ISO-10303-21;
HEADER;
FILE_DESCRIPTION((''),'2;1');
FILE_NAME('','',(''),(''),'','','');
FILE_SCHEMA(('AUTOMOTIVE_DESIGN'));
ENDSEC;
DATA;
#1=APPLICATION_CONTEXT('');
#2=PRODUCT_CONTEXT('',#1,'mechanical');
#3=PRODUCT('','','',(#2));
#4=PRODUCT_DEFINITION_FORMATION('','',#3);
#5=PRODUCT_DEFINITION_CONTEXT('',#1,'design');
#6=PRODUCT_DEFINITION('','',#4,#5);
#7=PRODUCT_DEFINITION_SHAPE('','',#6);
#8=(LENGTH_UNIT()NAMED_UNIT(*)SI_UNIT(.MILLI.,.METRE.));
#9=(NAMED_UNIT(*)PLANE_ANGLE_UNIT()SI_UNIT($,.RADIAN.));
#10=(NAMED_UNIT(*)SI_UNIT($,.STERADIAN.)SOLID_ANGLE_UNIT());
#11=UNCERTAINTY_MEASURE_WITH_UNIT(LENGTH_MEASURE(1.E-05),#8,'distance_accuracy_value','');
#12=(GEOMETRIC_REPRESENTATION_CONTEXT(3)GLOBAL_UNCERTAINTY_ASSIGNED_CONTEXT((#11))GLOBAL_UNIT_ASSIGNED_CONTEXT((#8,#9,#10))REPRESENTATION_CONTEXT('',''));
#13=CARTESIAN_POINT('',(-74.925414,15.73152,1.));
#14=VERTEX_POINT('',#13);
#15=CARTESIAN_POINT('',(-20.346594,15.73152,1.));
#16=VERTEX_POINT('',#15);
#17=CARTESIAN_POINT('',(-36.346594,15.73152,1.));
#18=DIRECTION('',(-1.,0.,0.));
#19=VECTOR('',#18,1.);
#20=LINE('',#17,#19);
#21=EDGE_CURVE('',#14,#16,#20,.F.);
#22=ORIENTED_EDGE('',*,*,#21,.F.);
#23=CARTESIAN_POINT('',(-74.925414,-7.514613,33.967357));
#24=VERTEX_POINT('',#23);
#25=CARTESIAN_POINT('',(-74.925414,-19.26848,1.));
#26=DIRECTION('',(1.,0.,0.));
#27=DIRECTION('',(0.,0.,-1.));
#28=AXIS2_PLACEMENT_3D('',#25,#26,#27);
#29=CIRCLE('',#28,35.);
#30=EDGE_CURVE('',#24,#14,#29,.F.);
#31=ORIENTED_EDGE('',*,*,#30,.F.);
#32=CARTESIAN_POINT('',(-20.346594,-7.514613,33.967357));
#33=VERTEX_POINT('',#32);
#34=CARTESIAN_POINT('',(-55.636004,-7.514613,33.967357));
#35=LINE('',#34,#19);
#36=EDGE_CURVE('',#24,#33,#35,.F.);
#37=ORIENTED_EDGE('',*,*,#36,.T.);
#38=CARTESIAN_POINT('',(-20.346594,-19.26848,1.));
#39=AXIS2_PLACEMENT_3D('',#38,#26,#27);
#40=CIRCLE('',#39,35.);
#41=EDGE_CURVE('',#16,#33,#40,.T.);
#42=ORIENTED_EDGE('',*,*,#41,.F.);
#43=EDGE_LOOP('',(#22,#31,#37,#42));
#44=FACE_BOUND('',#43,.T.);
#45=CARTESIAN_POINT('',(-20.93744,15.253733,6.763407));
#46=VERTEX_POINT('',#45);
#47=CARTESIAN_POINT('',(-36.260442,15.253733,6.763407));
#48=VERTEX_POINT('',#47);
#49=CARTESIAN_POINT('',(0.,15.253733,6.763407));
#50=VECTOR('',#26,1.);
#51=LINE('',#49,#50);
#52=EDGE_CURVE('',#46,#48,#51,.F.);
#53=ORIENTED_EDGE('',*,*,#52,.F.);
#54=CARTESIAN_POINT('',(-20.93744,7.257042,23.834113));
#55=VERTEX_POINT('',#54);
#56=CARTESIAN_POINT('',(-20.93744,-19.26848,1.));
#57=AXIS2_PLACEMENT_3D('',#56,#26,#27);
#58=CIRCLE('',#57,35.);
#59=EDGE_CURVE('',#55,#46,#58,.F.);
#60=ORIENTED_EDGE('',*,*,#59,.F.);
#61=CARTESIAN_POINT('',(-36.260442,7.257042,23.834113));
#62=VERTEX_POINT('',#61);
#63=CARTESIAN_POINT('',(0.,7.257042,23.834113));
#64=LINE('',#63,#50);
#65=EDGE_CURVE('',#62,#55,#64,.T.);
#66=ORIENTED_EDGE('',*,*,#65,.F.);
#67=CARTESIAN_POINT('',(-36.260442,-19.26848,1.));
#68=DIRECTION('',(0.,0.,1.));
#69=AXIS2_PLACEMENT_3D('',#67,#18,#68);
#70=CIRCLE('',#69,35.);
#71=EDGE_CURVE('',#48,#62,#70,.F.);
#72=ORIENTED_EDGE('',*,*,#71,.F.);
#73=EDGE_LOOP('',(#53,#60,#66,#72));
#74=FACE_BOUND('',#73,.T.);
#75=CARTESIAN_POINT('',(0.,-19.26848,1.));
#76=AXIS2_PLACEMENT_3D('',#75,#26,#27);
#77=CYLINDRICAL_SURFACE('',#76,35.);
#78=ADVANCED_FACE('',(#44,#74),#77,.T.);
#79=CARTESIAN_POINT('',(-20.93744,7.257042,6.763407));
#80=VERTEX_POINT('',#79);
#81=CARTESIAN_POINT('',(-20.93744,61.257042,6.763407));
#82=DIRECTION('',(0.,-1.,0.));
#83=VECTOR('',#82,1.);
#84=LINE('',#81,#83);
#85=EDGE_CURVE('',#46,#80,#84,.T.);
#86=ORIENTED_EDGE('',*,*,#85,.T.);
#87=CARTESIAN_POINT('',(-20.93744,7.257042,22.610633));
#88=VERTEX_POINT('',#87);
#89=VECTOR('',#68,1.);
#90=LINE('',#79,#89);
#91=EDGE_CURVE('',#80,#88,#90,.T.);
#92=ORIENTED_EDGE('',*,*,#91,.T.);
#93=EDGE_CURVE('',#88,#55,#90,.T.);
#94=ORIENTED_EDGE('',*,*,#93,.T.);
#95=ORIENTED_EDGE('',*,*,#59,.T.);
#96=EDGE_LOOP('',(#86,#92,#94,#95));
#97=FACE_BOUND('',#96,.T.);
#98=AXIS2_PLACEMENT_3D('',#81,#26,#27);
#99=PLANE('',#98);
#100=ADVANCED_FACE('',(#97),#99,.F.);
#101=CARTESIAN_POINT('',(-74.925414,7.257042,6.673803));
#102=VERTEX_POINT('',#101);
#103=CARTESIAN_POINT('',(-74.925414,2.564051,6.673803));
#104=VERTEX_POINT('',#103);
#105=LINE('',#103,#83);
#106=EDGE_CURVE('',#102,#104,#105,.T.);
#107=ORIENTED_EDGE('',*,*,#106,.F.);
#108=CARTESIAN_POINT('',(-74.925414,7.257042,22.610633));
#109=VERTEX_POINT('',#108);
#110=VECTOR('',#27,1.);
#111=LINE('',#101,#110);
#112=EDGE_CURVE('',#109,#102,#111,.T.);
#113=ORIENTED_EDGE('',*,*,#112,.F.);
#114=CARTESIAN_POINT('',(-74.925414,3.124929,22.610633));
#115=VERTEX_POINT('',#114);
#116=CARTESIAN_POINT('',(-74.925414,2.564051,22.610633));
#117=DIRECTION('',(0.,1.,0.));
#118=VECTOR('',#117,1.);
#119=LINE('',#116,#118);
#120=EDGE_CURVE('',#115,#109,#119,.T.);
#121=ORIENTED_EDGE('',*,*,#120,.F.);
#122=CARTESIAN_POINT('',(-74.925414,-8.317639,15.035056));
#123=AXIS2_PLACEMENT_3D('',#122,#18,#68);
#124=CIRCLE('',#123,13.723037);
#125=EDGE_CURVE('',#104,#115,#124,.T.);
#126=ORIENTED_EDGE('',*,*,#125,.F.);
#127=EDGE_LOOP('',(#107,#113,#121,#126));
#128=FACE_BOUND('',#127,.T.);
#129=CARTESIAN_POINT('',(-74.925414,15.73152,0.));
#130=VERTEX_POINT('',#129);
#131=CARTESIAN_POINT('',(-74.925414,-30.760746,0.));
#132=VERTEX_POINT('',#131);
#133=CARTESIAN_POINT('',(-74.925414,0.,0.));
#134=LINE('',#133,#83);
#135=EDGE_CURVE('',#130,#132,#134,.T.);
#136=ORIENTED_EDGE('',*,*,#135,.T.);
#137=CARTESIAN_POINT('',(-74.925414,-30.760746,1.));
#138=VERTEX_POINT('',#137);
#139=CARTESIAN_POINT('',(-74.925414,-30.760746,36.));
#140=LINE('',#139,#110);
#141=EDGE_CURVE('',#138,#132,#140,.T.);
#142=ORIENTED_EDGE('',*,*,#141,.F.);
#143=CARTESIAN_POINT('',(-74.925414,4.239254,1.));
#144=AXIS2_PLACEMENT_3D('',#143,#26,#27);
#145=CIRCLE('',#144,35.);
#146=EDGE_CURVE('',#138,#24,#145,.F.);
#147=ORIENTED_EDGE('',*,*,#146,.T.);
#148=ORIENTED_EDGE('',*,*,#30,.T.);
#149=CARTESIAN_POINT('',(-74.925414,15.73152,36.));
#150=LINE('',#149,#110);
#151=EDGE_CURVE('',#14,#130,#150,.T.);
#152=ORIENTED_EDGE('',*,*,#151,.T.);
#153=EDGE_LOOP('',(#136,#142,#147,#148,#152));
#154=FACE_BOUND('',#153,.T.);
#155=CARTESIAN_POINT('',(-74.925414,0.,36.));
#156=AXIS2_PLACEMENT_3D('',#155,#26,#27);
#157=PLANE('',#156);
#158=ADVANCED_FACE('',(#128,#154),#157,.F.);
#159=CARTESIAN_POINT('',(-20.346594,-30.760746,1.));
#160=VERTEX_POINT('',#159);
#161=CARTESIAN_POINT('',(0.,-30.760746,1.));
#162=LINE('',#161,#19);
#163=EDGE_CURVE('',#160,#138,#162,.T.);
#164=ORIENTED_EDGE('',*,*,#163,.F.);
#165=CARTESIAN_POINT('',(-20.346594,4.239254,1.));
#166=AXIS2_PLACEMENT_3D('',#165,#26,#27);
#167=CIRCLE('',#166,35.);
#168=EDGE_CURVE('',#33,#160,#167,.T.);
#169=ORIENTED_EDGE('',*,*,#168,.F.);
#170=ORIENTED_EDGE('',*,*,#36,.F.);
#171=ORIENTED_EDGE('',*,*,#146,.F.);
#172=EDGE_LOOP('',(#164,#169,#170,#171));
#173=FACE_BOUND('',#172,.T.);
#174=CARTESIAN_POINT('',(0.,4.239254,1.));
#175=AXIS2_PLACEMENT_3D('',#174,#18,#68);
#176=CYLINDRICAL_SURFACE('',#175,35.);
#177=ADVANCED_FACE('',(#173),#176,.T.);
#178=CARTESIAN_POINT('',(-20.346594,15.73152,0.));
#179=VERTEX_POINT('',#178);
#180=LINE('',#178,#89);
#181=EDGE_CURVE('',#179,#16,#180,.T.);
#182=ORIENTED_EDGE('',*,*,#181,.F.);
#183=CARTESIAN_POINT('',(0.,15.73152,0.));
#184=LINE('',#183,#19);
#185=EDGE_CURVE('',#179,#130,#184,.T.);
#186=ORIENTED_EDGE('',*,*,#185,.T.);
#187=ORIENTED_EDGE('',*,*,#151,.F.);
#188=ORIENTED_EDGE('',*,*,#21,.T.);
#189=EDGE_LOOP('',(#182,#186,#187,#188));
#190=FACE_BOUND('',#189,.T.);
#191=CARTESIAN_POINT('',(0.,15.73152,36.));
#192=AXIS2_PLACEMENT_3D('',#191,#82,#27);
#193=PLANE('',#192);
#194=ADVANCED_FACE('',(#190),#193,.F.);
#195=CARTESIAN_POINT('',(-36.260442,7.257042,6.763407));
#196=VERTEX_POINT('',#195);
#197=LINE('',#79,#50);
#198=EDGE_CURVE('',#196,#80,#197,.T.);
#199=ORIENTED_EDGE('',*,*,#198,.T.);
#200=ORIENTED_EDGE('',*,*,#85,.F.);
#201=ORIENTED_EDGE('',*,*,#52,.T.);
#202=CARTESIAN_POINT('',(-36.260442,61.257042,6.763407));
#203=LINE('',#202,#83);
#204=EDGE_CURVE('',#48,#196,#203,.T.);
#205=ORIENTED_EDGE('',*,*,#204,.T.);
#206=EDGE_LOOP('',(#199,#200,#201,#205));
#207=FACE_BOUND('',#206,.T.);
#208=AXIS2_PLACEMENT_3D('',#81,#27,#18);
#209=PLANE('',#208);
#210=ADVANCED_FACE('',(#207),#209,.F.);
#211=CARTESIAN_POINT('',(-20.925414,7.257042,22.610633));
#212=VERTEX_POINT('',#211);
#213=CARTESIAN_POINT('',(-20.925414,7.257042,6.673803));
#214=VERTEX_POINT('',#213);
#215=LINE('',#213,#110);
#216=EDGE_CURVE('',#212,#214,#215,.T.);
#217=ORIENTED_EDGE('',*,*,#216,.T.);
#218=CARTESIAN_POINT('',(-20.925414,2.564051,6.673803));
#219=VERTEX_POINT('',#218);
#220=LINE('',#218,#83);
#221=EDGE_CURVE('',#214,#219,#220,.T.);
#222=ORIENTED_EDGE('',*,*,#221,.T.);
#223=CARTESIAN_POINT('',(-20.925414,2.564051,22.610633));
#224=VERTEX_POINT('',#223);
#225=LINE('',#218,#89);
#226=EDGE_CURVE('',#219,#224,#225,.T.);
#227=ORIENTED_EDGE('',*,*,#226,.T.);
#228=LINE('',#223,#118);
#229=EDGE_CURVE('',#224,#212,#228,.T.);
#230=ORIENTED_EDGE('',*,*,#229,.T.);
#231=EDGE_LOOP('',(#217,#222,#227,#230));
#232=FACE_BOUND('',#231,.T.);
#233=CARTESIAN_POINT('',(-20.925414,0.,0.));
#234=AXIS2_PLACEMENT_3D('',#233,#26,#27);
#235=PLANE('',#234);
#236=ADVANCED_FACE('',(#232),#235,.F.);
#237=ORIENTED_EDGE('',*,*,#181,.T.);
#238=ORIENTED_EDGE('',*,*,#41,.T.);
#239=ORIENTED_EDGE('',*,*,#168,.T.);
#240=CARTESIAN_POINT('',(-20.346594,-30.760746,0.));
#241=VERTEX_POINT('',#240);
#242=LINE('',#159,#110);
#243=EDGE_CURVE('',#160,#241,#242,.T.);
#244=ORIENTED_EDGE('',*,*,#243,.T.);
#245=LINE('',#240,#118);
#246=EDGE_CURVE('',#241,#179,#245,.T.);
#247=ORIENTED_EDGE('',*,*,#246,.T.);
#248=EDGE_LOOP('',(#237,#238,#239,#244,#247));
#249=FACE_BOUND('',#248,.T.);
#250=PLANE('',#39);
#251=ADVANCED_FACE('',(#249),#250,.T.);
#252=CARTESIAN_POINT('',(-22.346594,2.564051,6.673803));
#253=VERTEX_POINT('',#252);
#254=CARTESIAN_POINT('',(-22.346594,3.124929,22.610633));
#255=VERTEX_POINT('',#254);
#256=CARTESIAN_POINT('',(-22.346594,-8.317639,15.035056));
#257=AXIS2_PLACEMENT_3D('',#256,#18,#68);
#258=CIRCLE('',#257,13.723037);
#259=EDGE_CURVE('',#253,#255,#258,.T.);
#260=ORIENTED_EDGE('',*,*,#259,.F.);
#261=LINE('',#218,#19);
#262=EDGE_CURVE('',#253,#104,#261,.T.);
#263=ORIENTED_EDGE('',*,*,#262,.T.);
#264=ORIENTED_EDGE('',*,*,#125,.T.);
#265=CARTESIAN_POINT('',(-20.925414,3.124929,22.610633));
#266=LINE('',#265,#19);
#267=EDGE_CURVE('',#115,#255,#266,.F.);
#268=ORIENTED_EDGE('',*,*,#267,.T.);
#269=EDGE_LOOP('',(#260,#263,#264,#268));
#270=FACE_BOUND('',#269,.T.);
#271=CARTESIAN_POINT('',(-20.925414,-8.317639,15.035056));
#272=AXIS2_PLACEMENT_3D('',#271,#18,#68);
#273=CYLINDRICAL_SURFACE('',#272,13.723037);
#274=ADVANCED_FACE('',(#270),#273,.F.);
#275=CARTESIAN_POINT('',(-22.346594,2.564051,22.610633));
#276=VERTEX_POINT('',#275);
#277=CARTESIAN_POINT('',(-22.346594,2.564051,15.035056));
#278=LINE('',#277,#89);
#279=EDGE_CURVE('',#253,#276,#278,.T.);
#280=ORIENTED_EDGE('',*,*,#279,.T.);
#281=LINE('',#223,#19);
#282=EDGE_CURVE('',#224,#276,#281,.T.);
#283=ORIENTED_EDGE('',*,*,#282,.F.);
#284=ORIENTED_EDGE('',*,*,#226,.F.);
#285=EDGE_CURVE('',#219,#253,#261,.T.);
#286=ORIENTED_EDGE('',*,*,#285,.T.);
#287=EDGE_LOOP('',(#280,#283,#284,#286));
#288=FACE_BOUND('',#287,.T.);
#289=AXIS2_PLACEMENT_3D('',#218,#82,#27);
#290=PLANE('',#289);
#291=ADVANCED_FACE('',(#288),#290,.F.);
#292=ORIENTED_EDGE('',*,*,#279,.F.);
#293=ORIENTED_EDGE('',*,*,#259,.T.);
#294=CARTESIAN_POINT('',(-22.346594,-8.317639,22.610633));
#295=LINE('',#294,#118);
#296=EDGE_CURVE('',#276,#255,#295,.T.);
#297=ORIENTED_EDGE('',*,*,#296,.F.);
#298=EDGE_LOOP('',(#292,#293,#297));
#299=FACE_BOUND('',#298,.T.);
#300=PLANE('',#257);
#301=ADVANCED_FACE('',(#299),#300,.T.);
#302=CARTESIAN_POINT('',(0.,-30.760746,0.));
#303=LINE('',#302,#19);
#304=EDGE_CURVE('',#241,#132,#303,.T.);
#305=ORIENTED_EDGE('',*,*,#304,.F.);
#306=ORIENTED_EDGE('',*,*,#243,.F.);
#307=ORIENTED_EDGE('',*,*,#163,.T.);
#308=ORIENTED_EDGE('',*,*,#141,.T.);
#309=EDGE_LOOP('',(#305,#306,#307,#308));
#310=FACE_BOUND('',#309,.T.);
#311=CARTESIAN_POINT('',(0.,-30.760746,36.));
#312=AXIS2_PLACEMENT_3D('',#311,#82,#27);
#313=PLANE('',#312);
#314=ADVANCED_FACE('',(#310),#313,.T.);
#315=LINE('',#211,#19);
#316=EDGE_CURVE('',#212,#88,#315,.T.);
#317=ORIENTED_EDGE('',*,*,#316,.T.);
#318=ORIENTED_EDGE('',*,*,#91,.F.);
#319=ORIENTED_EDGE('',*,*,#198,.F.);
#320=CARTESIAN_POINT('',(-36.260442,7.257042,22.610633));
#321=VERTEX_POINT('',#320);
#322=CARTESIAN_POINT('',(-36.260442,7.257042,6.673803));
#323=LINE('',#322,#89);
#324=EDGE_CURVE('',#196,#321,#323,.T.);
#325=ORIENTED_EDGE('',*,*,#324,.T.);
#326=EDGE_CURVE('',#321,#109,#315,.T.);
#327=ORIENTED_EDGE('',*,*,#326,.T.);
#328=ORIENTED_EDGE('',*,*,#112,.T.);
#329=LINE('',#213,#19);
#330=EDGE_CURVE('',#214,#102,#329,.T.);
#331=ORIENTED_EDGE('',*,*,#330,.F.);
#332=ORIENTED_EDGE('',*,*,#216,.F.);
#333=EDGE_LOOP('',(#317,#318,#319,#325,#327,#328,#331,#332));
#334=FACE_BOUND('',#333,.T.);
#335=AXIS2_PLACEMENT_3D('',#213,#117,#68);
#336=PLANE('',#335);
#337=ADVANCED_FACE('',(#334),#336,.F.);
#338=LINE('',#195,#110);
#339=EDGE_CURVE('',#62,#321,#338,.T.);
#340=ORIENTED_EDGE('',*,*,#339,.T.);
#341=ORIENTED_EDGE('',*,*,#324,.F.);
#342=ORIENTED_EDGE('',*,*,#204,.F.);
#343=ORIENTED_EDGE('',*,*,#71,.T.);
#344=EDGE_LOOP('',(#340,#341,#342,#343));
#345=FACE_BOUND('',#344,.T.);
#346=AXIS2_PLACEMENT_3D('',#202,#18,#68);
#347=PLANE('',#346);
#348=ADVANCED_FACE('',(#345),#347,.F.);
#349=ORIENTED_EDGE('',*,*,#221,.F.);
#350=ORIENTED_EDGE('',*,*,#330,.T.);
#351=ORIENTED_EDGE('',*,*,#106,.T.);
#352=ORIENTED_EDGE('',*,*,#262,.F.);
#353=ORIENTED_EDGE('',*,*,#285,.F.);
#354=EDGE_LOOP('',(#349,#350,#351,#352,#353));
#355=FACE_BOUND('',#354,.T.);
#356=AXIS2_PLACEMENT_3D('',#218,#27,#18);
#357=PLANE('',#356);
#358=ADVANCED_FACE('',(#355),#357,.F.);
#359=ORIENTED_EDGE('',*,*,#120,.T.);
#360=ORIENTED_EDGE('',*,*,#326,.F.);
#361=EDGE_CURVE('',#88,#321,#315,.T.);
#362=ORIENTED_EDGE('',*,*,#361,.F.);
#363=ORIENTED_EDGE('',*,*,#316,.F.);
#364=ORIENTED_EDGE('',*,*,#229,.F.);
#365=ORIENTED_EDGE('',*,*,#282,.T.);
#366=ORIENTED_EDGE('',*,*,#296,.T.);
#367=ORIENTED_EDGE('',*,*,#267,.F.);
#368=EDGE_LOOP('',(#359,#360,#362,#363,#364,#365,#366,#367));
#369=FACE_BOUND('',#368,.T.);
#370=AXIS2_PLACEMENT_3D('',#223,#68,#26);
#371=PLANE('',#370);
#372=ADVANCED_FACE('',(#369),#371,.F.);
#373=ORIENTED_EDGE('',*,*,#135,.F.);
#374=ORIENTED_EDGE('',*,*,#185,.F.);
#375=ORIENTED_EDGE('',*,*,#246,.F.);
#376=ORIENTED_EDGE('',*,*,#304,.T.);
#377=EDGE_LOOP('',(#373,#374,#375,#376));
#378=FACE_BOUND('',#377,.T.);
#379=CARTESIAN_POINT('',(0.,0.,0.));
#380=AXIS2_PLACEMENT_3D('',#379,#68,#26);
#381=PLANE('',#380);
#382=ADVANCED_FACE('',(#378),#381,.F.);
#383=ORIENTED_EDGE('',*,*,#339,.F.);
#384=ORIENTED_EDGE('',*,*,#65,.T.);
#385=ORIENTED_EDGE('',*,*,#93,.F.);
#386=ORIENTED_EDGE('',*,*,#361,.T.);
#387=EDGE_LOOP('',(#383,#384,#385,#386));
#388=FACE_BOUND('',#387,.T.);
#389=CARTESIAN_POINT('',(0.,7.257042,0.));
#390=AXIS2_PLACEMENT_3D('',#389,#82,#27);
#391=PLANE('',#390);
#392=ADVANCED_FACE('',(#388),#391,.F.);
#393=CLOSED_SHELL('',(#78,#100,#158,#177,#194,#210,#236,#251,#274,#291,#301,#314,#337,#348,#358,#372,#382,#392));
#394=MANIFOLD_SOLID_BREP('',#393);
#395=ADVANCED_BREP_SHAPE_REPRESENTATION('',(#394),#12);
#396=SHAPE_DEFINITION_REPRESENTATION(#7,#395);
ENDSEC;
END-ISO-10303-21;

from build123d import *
from build123d.topology import SkipClean

# Parameters (mm, degrees)
CROQUIS1_W              = 38.578820375
CROQUIS1_H              = 46.492266094
SALIENTE_EXTRUIR1_DEPTH = 36
CROQUIS2_R              = 13.723036729
CORTAR_EXTRUIR1_DEPTH   = 54
REDONDEO1_R             = 35
SALIENTE_EXTRUIR2_DEPTH = 16
CROQUIS4_R              = 13.723036729
CORTAR_EXTRUIR2_DEPTH   = 14
CROQUIS5_W              = 15.936830691
CROQUIS5_H              = 4.692990875
CORTAR_EXTRUIR3_DEPTH   = 54
CROQUIS6_W              = 15.323001746
CROQUIS6_H              = 19.007540334
CORTAR_EXTRUIR4_DEPTH   = 54


with BuildPart() as part:
    # Croquis1 → Saliente-Extruir1 (new body)
    with BuildSketch(Plane.XY):
        with Locations((-55.636003999, -7.514612749)):
            Rectangle(CROQUIS1_W, CROQUIS1_H)
    extrude(amount=SALIENTE_EXTRUIR1_DEPTH)

    # Croquis2 → Cortar-Extruir1 (cut)
    with BuildSketch(Plane.ZY.offset(74.925414186)):
        with Locations((15.035056118, -8.31763911)):
            Circle(CROQUIS2_R)
    extrude(amount=-CORTAR_EXTRUIR1_DEPTH, mode=Mode.SUBTRACT)

    # Redondeo1
    # the kernel refuses this fillet: 35 mm, written as the material it takes off along each edge
    with BuildSketch(Plane(origin=(51.153406189, 15.731520298, 36), x_dir=(0, 0, -1), z_dir=(-1, 0, 0))) as redondeo1_piece_1:
        with BuildLine():
            CenterArc((REDONDEO1_R, REDONDEO1_R), REDONDEO1_R, 180, 90)
            Line((0, REDONDEO1_R), (0, 0))
            Line((0, 0), (REDONDEO1_R, 0))
        make_face()
    extrude(amount=213.578820376, mode=Mode.SUBTRACT)
    with BuildSketch(Plane(origin=(-162.425414186, -30.760745796, 36), x_dir=(0, 1, 0), z_dir=(1, 0, 0))) as redondeo1_piece_2:
        with BuildLine():
            CenterArc((REDONDEO1_R, -REDONDEO1_R), REDONDEO1_R, 90, 90)
            Line((0, -REDONDEO1_R), (0, 0))
            Line((0, 0), (REDONDEO1_R, 0))
        make_face()
    extrude(amount=213.578820376, mode=Mode.SUBTRACT)

    # Croquis3 → Saliente-Extruir2 (add)
    with BuildSketch(Plane(origin=(-36.346593811, 0, 0), x_dir=(0, 0, -1), z_dir=(1, 0, 0))):
        with BuildLine():
            Line((0, 15.731520298), (-1, 15.731520298))
            ThreePointArc((-1, 15.731520298), (-21.169465246, 9.335587695), (-33.967356759, -7.514612749))
            ThreePointArc((-33.967356759, -7.514612749), (-21.169465246, -24.364813193), (-1, -30.760745796))
            Line((-1, -30.760745796), (0, -30.760745796))
            Line((0, -30.760745796), (0, 15.731520298))
        make_face()
    extrude(amount=SALIENTE_EXTRUIR2_DEPTH)

    # Croquis4 → Cortar-Extruir2 (cut)
    with SkipClean():  # the faces are left unmerged after this step: merging them gives an invalid solid
        with BuildSketch(Plane.ZY.offset(36.346593811)):
            with Locations((15.035056118, -8.31763911)):
                Circle(CROQUIS4_R)
        extrude(amount=-CORTAR_EXTRUIR2_DEPTH, mode=Mode.SUBTRACT)

    # Croquis5 → Cortar-Extruir3 (cut)
    with SkipClean():  # the faces are left unmerged after this step: merging them gives an invalid solid
        with BuildSketch(Plane.ZY.offset(74.925414186)):
            with Locations((14.642217913, 4.910546276)):
                Rectangle(CROQUIS5_W, CROQUIS5_H)
        extrude(amount=-CORTAR_EXTRUIR3_DEPTH, mode=Mode.SUBTRACT)

    # Croquis6 → Cortar-Extruir4 (cut)
    with SkipClean():  # the faces are left unmerged after this step: merging them gives an invalid solid
        with BuildSketch(Plane.XZ.offset(-7.257041714)):
            with Locations((-28.598941082, 16.267176719)):
                Rectangle(CROQUIS6_W, CROQUIS6_H)
        extrude(amount=-CORTAR_EXTRUIR4_DEPTH, mode=Mode.SUBTRACT)


solid = part.part
